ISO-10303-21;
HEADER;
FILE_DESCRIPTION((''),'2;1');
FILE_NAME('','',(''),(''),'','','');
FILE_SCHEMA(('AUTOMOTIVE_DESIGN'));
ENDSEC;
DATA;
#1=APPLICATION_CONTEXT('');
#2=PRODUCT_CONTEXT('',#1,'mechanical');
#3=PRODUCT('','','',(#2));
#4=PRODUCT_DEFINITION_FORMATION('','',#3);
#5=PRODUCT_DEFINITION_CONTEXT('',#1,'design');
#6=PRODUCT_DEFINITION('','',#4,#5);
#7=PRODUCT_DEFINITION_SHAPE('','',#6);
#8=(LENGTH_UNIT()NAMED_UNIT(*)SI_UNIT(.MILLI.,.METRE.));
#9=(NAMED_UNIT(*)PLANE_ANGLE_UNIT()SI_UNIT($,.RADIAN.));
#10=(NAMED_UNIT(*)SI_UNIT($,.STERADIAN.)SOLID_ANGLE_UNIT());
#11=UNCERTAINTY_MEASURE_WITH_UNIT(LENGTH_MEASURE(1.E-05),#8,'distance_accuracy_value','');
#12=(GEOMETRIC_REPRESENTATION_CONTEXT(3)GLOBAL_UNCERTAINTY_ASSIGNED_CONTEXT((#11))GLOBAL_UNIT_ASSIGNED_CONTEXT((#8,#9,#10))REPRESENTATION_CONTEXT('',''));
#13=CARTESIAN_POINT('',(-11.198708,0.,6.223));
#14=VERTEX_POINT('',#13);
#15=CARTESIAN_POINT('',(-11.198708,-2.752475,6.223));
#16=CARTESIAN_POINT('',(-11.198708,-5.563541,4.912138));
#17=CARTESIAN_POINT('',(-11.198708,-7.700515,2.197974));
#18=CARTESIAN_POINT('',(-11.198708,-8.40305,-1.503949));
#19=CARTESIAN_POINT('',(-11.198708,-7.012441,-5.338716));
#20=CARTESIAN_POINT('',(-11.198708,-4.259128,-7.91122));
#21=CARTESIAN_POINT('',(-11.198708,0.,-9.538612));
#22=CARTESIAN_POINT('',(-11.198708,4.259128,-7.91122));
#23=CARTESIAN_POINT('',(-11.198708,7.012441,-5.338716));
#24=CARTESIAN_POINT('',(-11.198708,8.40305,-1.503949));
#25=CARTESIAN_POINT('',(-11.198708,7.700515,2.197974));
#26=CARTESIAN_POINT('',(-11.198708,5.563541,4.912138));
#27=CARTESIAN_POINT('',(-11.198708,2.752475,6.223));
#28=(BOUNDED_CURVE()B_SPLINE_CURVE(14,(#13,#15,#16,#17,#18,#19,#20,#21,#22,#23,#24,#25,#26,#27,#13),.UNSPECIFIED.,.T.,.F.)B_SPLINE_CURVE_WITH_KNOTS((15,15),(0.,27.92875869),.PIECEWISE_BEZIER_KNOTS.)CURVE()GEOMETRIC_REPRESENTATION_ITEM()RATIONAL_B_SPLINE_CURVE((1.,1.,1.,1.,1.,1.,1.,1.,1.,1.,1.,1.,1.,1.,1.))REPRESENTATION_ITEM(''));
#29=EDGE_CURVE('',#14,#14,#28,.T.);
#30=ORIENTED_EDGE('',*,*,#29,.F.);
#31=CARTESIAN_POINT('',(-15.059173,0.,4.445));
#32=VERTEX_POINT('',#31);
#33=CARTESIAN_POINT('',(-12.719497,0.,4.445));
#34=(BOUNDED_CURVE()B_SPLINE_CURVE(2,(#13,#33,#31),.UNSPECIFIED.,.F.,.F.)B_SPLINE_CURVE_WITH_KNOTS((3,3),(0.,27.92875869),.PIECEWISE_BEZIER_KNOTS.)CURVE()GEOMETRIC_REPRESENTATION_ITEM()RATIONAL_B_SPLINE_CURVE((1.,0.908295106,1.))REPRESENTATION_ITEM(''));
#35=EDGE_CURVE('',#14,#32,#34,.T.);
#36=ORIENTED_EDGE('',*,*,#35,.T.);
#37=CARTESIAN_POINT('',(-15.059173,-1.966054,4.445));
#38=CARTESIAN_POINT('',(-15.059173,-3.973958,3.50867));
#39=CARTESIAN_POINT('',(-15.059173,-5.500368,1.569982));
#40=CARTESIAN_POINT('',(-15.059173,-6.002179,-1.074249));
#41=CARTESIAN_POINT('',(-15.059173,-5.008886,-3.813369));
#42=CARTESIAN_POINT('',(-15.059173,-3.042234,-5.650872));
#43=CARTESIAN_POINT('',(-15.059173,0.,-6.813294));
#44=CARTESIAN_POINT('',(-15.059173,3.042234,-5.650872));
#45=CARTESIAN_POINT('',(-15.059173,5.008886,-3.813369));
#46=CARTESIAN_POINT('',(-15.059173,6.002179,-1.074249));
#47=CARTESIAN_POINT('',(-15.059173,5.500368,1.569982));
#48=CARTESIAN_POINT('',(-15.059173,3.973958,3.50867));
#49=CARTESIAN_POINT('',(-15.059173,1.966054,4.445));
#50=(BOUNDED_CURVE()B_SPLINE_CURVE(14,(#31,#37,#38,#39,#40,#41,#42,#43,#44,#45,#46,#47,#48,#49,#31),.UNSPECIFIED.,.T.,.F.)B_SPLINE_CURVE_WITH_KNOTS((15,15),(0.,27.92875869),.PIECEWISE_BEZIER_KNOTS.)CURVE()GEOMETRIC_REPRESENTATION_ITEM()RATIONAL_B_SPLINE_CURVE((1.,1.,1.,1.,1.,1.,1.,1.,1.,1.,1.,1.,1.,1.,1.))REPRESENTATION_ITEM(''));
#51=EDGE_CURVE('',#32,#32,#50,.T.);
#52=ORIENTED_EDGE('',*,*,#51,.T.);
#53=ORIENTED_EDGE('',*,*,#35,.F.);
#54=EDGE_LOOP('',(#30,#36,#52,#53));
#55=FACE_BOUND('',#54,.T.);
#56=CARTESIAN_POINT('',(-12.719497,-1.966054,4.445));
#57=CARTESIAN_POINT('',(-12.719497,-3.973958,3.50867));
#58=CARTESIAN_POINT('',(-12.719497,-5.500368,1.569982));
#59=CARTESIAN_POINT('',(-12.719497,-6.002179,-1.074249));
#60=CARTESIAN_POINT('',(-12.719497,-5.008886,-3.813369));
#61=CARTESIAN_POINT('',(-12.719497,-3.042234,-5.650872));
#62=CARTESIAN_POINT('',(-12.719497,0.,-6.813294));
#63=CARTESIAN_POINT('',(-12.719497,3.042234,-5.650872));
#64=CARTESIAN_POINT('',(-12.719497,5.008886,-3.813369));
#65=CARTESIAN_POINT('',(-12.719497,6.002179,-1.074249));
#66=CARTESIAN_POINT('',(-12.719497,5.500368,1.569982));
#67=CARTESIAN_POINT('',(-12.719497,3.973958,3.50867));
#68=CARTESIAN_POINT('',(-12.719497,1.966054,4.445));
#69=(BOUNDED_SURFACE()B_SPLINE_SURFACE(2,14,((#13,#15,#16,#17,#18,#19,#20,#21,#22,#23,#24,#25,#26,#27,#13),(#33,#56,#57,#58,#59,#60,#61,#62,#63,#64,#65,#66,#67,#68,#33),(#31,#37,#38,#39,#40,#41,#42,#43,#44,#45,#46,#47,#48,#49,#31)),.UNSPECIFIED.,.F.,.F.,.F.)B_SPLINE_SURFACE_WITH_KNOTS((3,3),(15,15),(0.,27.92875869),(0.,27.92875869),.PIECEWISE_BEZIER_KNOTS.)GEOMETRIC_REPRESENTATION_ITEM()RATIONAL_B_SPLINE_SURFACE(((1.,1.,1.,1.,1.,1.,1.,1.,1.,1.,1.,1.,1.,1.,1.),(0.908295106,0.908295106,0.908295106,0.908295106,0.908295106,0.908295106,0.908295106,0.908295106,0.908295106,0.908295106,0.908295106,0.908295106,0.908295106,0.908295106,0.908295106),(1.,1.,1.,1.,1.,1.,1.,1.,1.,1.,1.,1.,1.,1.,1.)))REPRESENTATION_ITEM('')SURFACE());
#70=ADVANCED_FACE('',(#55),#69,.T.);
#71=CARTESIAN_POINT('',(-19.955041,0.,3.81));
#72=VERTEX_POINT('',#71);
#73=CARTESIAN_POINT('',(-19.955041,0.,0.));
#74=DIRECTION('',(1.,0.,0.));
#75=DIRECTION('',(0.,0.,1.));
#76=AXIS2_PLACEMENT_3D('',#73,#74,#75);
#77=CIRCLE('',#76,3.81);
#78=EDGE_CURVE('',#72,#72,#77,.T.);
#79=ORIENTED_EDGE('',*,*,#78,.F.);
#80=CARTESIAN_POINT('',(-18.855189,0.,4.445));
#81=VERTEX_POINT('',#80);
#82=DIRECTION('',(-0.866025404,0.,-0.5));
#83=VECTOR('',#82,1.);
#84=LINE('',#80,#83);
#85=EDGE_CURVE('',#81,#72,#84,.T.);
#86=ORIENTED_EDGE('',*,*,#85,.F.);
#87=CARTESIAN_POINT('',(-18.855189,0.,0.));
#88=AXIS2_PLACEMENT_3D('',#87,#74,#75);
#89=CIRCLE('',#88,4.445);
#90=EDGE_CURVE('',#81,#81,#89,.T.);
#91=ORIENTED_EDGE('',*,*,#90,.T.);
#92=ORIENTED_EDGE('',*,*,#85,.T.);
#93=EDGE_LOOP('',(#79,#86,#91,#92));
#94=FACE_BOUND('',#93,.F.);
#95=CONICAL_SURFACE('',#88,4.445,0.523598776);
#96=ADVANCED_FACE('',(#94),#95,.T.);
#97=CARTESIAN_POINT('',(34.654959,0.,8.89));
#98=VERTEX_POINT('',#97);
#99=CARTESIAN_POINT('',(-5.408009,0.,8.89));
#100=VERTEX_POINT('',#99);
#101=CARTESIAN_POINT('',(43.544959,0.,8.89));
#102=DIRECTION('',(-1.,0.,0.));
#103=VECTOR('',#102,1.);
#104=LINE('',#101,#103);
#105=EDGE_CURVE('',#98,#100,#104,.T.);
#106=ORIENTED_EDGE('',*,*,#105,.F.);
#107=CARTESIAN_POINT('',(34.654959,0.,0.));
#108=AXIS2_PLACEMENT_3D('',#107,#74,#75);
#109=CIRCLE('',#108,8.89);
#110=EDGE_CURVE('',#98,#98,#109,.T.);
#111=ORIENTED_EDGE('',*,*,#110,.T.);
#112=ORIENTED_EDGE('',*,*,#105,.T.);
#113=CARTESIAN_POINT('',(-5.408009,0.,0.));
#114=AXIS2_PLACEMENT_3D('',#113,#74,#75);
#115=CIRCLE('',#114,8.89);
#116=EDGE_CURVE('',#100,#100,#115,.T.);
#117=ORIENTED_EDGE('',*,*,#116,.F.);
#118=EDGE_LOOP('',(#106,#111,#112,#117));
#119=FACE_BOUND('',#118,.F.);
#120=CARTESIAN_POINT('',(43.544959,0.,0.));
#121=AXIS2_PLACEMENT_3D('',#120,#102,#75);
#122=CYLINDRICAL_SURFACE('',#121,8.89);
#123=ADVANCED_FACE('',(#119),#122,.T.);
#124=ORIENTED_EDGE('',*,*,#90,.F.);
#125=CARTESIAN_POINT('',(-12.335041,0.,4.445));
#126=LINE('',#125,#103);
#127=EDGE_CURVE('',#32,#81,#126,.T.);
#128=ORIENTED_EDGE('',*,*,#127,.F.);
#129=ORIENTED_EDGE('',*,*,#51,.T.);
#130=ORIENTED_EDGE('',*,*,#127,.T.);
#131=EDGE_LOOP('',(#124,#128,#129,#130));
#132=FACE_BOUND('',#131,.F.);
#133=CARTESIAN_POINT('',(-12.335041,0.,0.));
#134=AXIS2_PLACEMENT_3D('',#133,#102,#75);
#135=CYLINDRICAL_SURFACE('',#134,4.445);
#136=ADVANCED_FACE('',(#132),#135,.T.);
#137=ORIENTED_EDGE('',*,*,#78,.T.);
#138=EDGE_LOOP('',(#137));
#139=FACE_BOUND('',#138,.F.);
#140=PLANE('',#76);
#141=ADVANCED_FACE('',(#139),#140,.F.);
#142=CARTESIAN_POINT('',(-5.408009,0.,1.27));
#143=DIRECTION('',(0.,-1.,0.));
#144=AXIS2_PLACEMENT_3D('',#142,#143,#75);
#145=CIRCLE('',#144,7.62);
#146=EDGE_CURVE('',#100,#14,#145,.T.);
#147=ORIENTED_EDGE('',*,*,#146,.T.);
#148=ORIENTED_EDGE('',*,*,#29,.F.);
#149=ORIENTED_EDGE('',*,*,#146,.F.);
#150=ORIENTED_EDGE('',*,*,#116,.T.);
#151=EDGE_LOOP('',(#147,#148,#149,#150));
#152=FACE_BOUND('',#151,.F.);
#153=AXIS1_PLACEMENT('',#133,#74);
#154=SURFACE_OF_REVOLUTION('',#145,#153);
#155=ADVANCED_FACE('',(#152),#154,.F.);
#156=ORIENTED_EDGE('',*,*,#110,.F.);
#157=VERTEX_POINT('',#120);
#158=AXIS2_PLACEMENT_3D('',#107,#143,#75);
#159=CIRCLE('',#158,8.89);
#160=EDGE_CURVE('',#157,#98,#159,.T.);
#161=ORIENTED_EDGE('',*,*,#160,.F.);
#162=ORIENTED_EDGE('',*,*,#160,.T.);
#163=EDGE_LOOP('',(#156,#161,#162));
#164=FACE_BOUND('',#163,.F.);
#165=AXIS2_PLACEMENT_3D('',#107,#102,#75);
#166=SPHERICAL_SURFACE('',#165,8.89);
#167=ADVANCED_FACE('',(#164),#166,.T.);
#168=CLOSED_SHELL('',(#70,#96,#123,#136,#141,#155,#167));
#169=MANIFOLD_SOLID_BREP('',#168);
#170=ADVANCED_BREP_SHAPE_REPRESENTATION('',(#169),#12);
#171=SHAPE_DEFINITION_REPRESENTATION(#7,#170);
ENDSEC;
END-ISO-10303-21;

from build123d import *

# Parameters (mm, degrees)
F2_R = 8.89
F4_R = 5.08


# Not quite as in the source:
# - a fillet or chamfer that OpenCascade refuses, or shapes differently, is made with other operations: its cross-section is extruded or revolved along the edge and cut away or added


with BuildPart() as f1:
    # F0 (on Front) → F1 (revolve)
    with BuildSketch(Plane.XZ):
        Polygon((-19.955041249, 4.445), (-19.955041249, 0), (43.544958751, 0), (43.544958751, 8.89), (-12.335041249, 8.89), (-12.335041249, 4.445), align=None)
    revolve(axis=Axis((11.794958751, 0, 0), (1, 0, 0)))

    # F2
    f2_edges = [f1.edges().sort_by_distance(p)[0] for p in [
        (43.544959, 0, -8.89),
    ]]
    fillet(f2_edges, radius=F2_R)

    # F3: fillet of radius 7.62 on 1 edges, made by hand

    # F3_s1 → F3_t2 (revolve, cut)
    with BuildSketch(Plane.XZ):
        with BuildLine():
            ThreePointArc((-5.4080090562, 8.89), (-9.5232793997, 7.6831856359), (-12.335041249, 4.445))
            Line((-12.335041249, 4.445), (-12.335041249, 8.89))
            Line((-12.335041249, 8.89), (-5.4080090562, 8.89))
        make_face()
    revolve(axis=Axis((-12.335041249, 0, 0), (1, 0, 0)), mode=Mode.SUBTRACT)

    # F4
    f4_edges = [f1.edges().sort_by_distance(p)[0] for p in [
        (-12.335041, 0, -4.445),
    ]]
    fillet(f4_edges, radius=F4_R)

    # F5: chamfer of 0.635 x 1.0998522628 on 1 edges, made by hand

    # F5_s1 → F5_t2 (revolve, cut)
    with BuildSketch(Plane.XZ):
        Polygon((-18.8551889862, 4.445), (-19.955041249, 3.81), (-19.955041249, 4.445), align=None)
    revolve(axis=Axis((-19.955041249, 0, 0), (1, 0, 0)), mode=Mode.SUBTRACT)


solid = f1.part
